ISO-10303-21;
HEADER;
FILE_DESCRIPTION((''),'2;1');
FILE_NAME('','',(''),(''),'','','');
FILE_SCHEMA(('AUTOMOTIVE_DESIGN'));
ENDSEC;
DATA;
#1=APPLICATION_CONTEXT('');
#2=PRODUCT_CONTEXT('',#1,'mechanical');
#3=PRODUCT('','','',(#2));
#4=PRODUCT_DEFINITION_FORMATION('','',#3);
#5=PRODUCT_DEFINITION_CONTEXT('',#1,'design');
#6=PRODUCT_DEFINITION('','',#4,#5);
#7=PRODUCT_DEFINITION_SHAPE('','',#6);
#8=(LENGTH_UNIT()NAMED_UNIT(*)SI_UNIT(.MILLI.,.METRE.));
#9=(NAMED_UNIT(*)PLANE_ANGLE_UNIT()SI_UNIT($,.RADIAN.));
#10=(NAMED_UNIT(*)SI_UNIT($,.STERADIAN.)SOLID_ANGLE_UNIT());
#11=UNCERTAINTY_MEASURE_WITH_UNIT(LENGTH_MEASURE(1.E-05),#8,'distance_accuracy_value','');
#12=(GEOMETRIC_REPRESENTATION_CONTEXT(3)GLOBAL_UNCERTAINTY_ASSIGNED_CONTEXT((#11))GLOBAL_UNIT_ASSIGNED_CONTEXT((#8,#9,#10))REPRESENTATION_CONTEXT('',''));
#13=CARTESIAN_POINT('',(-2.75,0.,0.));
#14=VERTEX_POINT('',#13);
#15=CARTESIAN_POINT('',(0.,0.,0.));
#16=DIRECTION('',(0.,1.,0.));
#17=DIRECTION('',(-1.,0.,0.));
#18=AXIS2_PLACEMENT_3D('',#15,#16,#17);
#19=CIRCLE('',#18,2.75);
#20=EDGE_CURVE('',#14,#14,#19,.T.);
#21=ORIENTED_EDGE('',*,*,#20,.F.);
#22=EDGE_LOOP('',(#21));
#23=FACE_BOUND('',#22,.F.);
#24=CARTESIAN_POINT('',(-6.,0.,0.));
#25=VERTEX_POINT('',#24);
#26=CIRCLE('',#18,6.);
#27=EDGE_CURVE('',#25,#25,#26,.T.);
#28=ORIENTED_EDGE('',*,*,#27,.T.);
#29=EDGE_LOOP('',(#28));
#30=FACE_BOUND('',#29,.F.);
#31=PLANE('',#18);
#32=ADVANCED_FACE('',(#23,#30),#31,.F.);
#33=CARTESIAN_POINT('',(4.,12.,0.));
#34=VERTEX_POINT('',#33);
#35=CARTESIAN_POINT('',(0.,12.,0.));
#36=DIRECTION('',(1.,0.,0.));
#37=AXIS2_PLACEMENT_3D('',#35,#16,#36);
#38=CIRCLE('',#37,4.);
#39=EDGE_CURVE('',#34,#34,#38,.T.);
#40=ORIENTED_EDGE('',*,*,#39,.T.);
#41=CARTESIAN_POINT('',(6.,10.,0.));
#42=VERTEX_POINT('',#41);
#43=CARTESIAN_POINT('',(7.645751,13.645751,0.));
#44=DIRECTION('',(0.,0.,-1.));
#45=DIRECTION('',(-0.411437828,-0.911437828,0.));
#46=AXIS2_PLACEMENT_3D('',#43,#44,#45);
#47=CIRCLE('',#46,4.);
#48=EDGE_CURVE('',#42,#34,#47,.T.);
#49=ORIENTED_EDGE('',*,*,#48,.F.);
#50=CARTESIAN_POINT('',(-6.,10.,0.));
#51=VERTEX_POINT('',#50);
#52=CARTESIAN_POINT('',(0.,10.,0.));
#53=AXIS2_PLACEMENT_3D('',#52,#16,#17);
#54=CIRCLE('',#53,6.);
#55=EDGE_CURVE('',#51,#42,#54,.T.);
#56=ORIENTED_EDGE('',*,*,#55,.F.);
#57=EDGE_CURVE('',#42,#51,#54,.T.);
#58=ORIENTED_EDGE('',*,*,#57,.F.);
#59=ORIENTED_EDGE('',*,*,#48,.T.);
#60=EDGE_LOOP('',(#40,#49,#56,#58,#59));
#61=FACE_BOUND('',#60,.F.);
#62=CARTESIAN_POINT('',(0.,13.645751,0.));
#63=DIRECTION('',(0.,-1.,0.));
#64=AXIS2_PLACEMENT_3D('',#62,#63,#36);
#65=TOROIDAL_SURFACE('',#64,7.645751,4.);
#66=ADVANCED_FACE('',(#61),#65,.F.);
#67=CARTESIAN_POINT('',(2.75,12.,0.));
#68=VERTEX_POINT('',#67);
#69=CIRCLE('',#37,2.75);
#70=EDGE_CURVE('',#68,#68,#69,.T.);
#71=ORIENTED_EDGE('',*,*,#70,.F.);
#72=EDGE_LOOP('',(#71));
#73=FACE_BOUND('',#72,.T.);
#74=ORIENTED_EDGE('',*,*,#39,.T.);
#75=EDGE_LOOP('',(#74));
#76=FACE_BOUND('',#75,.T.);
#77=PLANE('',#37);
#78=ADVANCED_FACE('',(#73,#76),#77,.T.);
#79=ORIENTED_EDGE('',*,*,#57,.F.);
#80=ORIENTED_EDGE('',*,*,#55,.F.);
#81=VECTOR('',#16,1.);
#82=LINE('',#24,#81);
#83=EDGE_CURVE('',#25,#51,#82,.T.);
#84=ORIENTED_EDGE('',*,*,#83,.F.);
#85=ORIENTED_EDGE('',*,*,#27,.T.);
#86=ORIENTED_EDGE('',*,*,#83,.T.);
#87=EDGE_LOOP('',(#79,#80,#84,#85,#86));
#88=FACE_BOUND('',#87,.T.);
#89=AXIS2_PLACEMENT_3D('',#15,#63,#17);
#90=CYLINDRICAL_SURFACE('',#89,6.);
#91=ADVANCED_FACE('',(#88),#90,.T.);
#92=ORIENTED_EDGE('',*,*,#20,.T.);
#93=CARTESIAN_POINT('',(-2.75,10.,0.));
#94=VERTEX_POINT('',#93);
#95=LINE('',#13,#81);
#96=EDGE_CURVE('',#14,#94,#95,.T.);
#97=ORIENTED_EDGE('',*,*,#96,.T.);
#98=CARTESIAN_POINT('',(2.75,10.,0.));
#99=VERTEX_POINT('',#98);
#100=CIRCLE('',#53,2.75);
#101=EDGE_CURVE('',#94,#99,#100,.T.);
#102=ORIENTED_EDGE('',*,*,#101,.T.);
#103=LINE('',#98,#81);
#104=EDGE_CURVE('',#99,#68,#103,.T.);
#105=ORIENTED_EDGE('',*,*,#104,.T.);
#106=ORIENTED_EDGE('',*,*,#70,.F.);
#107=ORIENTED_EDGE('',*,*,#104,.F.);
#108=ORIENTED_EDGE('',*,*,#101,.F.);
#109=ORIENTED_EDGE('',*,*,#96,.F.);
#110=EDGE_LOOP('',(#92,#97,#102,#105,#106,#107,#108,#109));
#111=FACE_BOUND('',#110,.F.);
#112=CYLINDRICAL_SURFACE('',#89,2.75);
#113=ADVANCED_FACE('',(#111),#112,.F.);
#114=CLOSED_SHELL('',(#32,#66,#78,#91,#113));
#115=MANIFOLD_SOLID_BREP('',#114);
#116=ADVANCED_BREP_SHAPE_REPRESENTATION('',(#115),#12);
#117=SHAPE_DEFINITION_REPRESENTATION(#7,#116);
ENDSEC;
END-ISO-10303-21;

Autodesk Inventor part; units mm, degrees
ref_plane "YZ Plane" through (0, 0, 0) normal (1, 0, 0) x (0, 1, 0)
ref_plane "XZ Plane" through (0, 0, 0) normal (0, 1, 0) x (-1, 0, 0)
ref_plane "XY Plane" through (0, 0, 0) normal (0, 0, 1) x (1, 0, 0)
sketch "Sketch1" plane through (0, 0, 0) normal (0, 1, 0) x (-1, 0, 0)
  circle A0 centre (0, 0) radius 6
  circle A1 centre (0, 0) radius 2.75
  dimension "d0" = 12
  dimension "d1" = 5.5
extrude "Extrusion1" add sketch "Sketch1" along normal blind 10
sketch "Sketch2" plane through (0, 10, 0) normal (0, 1, 0) x (1, 0, 0)
  circle A0 centre (0, 0) radius 2.75
  circle A1 centre (0, 0) radius 4
  dimension "d4" = 5.5
  dimension "d5" = 8
extrude "Extrusion2" add sketch "Sketch2" along normal blind 2
fillet "Fillet1" radius 4 1 edges at (-4, 10, 0)
properties part number "Idler_Spacer"
